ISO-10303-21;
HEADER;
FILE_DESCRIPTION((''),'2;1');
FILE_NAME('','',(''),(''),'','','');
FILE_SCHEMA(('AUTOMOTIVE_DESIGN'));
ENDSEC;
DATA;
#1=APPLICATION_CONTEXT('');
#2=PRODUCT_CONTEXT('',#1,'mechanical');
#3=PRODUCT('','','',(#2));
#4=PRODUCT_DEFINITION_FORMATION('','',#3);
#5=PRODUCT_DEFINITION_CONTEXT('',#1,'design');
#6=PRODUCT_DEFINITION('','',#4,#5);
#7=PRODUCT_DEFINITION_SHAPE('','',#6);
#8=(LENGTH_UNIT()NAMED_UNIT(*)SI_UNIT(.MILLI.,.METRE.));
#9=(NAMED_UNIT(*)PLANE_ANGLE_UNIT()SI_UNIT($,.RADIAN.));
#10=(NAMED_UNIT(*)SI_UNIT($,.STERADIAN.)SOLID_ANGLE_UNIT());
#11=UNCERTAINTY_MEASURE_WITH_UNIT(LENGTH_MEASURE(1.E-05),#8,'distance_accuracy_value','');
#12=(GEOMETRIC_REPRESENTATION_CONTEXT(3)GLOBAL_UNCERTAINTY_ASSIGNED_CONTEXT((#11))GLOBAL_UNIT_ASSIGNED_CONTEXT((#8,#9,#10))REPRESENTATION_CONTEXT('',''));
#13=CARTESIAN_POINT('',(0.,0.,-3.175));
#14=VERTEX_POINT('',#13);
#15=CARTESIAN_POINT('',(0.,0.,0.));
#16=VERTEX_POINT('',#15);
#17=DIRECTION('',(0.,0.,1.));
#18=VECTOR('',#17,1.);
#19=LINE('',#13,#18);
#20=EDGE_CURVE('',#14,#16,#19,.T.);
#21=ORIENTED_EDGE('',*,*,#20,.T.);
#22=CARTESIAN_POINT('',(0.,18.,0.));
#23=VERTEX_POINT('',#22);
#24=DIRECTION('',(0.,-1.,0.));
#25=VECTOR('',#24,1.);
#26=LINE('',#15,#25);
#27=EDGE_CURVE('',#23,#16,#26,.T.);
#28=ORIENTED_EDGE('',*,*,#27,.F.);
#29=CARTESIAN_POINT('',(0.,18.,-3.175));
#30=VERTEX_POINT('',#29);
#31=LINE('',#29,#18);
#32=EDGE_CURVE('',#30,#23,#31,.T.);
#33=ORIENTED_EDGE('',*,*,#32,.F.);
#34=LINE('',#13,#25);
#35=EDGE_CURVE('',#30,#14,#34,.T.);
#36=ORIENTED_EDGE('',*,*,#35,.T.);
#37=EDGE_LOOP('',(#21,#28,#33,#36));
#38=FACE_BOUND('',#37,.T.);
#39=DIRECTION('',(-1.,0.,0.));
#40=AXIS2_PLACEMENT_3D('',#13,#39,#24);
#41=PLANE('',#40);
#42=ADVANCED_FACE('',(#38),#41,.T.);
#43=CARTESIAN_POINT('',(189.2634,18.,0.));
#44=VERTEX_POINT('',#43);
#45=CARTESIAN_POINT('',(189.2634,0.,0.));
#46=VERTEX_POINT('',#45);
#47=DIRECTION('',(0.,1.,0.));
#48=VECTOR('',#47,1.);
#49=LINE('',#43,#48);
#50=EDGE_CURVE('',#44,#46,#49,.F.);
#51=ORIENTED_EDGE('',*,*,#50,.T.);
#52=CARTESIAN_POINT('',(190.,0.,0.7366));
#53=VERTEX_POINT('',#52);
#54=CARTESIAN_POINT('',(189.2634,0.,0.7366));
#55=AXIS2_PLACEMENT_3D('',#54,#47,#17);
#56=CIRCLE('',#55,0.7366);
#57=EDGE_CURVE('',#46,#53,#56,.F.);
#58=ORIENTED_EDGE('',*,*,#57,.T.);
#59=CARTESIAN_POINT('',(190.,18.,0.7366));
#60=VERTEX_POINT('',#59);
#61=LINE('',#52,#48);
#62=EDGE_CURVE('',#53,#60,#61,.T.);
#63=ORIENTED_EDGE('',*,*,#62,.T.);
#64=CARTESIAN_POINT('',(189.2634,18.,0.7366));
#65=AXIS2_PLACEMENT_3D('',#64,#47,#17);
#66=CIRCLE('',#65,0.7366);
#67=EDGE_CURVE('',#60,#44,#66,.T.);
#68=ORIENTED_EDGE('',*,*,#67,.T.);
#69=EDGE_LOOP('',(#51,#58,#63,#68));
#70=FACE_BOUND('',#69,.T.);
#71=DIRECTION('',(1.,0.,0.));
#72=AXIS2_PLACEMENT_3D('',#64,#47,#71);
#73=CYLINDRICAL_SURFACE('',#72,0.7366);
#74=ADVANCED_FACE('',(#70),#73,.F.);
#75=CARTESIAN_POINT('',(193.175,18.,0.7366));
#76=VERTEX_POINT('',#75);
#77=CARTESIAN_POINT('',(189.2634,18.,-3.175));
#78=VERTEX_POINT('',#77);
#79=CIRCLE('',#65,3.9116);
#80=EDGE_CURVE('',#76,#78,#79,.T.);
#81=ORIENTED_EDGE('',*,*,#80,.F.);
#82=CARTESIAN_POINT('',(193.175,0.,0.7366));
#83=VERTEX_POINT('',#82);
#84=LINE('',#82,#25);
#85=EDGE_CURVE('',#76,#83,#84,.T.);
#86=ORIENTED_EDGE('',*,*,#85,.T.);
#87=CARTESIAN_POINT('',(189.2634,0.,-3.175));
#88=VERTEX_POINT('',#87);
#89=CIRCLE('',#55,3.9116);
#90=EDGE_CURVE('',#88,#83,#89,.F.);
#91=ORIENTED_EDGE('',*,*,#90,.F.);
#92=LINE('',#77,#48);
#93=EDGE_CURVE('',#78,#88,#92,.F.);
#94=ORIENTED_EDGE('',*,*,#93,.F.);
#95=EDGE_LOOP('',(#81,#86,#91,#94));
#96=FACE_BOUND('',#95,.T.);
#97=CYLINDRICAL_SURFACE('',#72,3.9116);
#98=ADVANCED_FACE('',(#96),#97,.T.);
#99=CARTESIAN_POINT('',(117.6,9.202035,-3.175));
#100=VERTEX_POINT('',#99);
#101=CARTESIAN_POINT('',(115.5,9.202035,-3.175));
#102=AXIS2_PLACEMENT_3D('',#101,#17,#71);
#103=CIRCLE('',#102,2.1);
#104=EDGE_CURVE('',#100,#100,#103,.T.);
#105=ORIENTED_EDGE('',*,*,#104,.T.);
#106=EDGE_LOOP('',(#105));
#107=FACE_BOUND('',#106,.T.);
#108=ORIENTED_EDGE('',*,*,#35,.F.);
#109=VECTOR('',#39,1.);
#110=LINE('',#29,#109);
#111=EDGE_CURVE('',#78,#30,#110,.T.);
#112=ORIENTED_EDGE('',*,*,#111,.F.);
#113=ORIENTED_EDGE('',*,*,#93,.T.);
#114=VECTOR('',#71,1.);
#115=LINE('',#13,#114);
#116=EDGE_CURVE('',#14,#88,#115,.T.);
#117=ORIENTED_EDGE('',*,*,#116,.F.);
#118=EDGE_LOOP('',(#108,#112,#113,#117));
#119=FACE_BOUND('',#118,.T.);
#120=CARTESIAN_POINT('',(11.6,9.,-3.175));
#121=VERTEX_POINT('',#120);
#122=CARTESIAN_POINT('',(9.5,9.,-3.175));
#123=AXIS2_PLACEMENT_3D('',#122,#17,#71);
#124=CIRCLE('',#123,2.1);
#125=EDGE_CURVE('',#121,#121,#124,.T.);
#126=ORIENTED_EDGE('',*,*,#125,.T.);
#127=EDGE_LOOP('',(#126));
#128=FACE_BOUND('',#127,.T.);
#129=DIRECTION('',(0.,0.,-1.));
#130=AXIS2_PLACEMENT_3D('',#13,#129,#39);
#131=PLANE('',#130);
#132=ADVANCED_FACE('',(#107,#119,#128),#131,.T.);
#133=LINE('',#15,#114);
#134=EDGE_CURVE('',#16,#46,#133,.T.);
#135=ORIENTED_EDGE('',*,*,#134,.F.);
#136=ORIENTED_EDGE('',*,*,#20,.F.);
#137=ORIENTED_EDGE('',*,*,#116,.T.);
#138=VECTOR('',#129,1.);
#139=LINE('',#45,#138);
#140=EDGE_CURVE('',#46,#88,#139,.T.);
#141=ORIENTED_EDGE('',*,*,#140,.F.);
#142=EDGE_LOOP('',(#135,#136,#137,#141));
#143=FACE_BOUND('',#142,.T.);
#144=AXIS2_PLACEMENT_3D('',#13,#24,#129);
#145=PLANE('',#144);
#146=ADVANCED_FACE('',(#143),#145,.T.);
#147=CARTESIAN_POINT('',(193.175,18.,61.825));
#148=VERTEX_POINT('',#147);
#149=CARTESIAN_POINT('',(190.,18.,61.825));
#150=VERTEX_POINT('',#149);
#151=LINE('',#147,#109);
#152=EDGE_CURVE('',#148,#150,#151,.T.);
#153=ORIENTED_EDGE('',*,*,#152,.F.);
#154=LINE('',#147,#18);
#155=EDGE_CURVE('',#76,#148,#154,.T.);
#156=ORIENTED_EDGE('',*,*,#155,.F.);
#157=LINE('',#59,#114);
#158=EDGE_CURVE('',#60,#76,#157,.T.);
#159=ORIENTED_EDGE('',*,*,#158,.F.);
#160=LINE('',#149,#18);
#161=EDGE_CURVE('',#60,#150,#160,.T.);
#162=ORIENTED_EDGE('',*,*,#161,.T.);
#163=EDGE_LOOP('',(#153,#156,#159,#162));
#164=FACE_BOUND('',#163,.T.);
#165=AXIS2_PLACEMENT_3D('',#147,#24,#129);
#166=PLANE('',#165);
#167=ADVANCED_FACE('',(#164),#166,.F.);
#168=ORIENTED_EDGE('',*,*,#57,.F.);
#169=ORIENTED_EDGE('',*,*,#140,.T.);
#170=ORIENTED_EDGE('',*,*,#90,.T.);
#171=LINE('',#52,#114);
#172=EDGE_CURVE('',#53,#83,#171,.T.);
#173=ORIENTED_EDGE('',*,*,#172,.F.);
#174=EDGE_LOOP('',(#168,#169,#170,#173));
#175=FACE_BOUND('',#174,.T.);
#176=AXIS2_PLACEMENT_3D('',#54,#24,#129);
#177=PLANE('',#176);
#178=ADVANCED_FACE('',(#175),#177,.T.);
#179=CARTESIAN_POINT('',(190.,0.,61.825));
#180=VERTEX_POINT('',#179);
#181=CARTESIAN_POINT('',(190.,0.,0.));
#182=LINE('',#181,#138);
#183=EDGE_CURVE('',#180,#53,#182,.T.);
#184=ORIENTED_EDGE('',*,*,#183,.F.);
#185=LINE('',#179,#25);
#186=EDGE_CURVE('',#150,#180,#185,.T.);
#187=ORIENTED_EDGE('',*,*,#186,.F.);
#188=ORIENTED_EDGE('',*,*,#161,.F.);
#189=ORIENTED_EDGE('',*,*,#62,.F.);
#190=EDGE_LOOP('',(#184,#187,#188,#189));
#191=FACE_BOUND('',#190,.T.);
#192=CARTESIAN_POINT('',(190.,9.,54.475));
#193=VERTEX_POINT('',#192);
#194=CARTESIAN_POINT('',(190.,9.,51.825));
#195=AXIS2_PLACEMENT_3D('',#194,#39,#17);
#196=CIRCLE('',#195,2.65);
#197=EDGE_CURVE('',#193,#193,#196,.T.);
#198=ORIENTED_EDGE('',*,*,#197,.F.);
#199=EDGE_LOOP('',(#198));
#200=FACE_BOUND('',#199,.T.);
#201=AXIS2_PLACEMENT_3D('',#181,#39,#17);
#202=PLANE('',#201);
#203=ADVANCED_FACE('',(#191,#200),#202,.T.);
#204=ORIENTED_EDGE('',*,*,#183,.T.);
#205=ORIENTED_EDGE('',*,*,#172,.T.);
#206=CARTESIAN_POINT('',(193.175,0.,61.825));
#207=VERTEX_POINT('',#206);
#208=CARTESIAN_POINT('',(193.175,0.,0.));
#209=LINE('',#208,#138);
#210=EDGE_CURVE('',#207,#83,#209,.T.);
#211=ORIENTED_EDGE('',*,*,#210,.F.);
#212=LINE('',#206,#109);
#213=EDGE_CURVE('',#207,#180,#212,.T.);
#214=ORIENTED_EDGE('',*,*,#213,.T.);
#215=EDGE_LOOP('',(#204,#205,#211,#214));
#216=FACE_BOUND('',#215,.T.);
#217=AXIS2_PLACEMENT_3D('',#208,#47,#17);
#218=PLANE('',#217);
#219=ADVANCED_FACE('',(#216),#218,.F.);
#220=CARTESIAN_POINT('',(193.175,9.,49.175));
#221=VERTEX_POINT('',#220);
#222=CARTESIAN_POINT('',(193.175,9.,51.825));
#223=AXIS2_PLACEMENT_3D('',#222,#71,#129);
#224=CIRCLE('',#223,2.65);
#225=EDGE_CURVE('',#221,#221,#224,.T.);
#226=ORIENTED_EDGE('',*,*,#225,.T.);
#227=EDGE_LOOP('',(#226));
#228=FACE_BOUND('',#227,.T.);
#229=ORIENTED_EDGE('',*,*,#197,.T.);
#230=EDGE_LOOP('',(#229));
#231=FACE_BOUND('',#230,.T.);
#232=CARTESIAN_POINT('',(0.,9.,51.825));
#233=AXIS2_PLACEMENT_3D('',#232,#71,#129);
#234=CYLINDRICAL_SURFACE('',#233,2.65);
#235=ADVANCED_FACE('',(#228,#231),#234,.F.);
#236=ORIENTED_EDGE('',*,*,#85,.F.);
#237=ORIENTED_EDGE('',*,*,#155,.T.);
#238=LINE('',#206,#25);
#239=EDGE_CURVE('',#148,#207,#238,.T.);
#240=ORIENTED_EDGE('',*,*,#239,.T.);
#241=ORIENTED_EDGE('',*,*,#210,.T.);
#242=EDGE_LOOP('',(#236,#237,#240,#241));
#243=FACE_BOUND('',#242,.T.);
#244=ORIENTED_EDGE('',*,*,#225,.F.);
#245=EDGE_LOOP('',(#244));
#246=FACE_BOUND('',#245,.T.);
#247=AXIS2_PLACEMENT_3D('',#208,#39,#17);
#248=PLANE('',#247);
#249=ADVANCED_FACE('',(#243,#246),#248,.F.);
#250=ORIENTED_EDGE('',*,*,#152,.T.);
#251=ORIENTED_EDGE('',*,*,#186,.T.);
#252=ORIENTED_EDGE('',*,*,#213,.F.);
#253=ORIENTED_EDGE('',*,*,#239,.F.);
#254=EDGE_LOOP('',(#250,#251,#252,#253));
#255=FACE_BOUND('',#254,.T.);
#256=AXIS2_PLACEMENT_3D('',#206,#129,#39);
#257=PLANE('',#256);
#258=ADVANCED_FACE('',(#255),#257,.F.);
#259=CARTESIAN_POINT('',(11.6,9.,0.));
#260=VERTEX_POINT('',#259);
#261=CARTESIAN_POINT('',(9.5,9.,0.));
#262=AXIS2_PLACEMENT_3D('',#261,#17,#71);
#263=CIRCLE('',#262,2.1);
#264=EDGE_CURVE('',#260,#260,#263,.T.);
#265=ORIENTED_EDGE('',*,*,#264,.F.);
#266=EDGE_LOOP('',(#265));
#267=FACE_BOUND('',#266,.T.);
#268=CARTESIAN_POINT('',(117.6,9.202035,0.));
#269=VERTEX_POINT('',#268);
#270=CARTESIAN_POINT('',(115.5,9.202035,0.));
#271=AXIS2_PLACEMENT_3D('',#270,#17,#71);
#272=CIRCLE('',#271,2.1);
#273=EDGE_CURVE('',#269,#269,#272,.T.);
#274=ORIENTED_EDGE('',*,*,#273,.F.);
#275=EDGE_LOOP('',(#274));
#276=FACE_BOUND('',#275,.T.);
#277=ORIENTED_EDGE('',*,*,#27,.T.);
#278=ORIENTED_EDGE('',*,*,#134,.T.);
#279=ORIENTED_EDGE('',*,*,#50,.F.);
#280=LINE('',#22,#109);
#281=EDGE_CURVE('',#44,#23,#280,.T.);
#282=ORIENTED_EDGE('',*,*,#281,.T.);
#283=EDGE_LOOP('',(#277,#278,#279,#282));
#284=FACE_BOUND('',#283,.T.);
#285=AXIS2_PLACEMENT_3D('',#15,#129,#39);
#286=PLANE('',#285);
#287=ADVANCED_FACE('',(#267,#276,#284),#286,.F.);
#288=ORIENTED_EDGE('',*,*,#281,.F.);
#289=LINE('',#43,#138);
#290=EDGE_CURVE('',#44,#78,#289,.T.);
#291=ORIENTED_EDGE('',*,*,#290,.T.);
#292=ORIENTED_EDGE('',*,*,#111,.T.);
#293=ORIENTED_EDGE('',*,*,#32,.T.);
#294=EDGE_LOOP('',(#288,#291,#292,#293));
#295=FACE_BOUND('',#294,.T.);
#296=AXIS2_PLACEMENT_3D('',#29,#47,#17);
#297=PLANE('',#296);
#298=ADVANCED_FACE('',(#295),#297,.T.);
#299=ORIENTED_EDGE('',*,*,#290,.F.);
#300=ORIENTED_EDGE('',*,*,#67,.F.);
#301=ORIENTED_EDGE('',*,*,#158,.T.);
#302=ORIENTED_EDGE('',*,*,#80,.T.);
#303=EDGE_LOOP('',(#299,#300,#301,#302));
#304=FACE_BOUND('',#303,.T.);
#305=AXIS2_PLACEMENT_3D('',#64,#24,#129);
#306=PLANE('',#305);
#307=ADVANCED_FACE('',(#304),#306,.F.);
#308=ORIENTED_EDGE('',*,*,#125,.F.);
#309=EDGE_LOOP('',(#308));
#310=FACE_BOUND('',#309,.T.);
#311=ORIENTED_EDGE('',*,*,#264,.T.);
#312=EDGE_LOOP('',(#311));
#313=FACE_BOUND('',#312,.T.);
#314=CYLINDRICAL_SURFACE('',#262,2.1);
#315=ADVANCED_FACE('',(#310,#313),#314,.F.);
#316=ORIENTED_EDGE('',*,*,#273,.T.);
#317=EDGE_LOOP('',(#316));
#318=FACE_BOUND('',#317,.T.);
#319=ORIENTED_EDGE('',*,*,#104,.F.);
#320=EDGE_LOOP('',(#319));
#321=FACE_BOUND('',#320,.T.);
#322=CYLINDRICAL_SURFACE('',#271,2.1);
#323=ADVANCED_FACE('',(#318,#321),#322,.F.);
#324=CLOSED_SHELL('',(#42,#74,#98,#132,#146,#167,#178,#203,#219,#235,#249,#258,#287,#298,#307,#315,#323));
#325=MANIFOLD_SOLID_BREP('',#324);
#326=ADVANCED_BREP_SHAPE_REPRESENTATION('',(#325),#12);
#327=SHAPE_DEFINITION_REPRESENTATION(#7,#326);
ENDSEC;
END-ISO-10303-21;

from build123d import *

# Parameters (mm, degrees)
SKETCH7_W                    = 190
SKETCH7_H                    = 18
BASE_FLANGE2_DEPTH           = 3.175
EDGE_FLANGE1_STRIP_W         = 14.1732
EDGE_FLANGE1_STRIP_H         = 3.175
EDGE_FLANGE1_STRIP_CUT_DEPTH = 18
EDGE_FLANGE1_DEPTH           = 18
M5X0_8_TAPPED_HOLE2_D        = 4.2
HOLE1_START                  = 190
HOLE1_OUTLINE_R              = 2.65
HOLE1_DEPTH                  = 3.175


# Read off the part's stored shape, not the designer's step: Hole1
# Sheet-metal steps are written as plain solids
with BuildPart() as part:
    # Sketch7 → Base-Flange2 (new body)
    with BuildSketch(Plane.XY):
        with Locations((95, 9)):
            Rectangle(SKETCH7_W, SKETCH7_H)
    extrude(amount=-BASE_FLANGE2_DEPTH)

    # Edge-Flange1 strip (across the edge) → Edge-Flange1 strip cut (cut)
    with BuildSketch(Plane(origin=(190, 0, 0), x_dir=(-1, 0, 0), z_dir=(0, 1, 0))):
        with Locations((-6.35, -1.5875)):
            Rectangle(EDGE_FLANGE1_STRIP_W, EDGE_FLANGE1_STRIP_H)
    extrude(amount=EDGE_FLANGE1_STRIP_CUT_DEPTH, mode=Mode.SUBTRACT)

    # Edge-Flange1 section (across the edge) → Edge-Flange1 (add)
    with BuildSketch(Plane(origin=(190, 0, 0), x_dir=(-1, 0, 0), z_dir=(0, 1, 0))):
        with BuildLine():
            Line((-3.175, 0.7366), (-3.175, 61.825))
            Line((-3.175, 61.825), (0, 61.825))
            Line((0, 61.825), (0, 0.7366))
            ThreePointArc((0, 0.7366), (0.215745145, 0.215745145), (0.7366, 0))
            Line((0.7366, 0), (0.7366, -3.175))
            ThreePointArc((0.7366, -3.175), (-2.029318885, -2.029318885), (-3.175, 0.7366))
        make_face()
    extrude(amount=EDGE_FLANGE1_DEPTH)

    # M5x0.8 Tapped Hole2 (through all)
    with Locations(Plane.XY):
        with Locations((9.5, 9), (115.5, 9.202035326)):
            Hole(M5X0_8_TAPPED_HOLE2_D / 2)

    # Hole1 outline → Hole1 (cut)
    with BuildSketch(Plane.YZ.offset(HOLE1_START)):
        with Locations((9, 51.825)):
            Circle(HOLE1_OUTLINE_R)
    extrude(amount=HOLE1_DEPTH, mode=Mode.SUBTRACT)


solid = part.part
